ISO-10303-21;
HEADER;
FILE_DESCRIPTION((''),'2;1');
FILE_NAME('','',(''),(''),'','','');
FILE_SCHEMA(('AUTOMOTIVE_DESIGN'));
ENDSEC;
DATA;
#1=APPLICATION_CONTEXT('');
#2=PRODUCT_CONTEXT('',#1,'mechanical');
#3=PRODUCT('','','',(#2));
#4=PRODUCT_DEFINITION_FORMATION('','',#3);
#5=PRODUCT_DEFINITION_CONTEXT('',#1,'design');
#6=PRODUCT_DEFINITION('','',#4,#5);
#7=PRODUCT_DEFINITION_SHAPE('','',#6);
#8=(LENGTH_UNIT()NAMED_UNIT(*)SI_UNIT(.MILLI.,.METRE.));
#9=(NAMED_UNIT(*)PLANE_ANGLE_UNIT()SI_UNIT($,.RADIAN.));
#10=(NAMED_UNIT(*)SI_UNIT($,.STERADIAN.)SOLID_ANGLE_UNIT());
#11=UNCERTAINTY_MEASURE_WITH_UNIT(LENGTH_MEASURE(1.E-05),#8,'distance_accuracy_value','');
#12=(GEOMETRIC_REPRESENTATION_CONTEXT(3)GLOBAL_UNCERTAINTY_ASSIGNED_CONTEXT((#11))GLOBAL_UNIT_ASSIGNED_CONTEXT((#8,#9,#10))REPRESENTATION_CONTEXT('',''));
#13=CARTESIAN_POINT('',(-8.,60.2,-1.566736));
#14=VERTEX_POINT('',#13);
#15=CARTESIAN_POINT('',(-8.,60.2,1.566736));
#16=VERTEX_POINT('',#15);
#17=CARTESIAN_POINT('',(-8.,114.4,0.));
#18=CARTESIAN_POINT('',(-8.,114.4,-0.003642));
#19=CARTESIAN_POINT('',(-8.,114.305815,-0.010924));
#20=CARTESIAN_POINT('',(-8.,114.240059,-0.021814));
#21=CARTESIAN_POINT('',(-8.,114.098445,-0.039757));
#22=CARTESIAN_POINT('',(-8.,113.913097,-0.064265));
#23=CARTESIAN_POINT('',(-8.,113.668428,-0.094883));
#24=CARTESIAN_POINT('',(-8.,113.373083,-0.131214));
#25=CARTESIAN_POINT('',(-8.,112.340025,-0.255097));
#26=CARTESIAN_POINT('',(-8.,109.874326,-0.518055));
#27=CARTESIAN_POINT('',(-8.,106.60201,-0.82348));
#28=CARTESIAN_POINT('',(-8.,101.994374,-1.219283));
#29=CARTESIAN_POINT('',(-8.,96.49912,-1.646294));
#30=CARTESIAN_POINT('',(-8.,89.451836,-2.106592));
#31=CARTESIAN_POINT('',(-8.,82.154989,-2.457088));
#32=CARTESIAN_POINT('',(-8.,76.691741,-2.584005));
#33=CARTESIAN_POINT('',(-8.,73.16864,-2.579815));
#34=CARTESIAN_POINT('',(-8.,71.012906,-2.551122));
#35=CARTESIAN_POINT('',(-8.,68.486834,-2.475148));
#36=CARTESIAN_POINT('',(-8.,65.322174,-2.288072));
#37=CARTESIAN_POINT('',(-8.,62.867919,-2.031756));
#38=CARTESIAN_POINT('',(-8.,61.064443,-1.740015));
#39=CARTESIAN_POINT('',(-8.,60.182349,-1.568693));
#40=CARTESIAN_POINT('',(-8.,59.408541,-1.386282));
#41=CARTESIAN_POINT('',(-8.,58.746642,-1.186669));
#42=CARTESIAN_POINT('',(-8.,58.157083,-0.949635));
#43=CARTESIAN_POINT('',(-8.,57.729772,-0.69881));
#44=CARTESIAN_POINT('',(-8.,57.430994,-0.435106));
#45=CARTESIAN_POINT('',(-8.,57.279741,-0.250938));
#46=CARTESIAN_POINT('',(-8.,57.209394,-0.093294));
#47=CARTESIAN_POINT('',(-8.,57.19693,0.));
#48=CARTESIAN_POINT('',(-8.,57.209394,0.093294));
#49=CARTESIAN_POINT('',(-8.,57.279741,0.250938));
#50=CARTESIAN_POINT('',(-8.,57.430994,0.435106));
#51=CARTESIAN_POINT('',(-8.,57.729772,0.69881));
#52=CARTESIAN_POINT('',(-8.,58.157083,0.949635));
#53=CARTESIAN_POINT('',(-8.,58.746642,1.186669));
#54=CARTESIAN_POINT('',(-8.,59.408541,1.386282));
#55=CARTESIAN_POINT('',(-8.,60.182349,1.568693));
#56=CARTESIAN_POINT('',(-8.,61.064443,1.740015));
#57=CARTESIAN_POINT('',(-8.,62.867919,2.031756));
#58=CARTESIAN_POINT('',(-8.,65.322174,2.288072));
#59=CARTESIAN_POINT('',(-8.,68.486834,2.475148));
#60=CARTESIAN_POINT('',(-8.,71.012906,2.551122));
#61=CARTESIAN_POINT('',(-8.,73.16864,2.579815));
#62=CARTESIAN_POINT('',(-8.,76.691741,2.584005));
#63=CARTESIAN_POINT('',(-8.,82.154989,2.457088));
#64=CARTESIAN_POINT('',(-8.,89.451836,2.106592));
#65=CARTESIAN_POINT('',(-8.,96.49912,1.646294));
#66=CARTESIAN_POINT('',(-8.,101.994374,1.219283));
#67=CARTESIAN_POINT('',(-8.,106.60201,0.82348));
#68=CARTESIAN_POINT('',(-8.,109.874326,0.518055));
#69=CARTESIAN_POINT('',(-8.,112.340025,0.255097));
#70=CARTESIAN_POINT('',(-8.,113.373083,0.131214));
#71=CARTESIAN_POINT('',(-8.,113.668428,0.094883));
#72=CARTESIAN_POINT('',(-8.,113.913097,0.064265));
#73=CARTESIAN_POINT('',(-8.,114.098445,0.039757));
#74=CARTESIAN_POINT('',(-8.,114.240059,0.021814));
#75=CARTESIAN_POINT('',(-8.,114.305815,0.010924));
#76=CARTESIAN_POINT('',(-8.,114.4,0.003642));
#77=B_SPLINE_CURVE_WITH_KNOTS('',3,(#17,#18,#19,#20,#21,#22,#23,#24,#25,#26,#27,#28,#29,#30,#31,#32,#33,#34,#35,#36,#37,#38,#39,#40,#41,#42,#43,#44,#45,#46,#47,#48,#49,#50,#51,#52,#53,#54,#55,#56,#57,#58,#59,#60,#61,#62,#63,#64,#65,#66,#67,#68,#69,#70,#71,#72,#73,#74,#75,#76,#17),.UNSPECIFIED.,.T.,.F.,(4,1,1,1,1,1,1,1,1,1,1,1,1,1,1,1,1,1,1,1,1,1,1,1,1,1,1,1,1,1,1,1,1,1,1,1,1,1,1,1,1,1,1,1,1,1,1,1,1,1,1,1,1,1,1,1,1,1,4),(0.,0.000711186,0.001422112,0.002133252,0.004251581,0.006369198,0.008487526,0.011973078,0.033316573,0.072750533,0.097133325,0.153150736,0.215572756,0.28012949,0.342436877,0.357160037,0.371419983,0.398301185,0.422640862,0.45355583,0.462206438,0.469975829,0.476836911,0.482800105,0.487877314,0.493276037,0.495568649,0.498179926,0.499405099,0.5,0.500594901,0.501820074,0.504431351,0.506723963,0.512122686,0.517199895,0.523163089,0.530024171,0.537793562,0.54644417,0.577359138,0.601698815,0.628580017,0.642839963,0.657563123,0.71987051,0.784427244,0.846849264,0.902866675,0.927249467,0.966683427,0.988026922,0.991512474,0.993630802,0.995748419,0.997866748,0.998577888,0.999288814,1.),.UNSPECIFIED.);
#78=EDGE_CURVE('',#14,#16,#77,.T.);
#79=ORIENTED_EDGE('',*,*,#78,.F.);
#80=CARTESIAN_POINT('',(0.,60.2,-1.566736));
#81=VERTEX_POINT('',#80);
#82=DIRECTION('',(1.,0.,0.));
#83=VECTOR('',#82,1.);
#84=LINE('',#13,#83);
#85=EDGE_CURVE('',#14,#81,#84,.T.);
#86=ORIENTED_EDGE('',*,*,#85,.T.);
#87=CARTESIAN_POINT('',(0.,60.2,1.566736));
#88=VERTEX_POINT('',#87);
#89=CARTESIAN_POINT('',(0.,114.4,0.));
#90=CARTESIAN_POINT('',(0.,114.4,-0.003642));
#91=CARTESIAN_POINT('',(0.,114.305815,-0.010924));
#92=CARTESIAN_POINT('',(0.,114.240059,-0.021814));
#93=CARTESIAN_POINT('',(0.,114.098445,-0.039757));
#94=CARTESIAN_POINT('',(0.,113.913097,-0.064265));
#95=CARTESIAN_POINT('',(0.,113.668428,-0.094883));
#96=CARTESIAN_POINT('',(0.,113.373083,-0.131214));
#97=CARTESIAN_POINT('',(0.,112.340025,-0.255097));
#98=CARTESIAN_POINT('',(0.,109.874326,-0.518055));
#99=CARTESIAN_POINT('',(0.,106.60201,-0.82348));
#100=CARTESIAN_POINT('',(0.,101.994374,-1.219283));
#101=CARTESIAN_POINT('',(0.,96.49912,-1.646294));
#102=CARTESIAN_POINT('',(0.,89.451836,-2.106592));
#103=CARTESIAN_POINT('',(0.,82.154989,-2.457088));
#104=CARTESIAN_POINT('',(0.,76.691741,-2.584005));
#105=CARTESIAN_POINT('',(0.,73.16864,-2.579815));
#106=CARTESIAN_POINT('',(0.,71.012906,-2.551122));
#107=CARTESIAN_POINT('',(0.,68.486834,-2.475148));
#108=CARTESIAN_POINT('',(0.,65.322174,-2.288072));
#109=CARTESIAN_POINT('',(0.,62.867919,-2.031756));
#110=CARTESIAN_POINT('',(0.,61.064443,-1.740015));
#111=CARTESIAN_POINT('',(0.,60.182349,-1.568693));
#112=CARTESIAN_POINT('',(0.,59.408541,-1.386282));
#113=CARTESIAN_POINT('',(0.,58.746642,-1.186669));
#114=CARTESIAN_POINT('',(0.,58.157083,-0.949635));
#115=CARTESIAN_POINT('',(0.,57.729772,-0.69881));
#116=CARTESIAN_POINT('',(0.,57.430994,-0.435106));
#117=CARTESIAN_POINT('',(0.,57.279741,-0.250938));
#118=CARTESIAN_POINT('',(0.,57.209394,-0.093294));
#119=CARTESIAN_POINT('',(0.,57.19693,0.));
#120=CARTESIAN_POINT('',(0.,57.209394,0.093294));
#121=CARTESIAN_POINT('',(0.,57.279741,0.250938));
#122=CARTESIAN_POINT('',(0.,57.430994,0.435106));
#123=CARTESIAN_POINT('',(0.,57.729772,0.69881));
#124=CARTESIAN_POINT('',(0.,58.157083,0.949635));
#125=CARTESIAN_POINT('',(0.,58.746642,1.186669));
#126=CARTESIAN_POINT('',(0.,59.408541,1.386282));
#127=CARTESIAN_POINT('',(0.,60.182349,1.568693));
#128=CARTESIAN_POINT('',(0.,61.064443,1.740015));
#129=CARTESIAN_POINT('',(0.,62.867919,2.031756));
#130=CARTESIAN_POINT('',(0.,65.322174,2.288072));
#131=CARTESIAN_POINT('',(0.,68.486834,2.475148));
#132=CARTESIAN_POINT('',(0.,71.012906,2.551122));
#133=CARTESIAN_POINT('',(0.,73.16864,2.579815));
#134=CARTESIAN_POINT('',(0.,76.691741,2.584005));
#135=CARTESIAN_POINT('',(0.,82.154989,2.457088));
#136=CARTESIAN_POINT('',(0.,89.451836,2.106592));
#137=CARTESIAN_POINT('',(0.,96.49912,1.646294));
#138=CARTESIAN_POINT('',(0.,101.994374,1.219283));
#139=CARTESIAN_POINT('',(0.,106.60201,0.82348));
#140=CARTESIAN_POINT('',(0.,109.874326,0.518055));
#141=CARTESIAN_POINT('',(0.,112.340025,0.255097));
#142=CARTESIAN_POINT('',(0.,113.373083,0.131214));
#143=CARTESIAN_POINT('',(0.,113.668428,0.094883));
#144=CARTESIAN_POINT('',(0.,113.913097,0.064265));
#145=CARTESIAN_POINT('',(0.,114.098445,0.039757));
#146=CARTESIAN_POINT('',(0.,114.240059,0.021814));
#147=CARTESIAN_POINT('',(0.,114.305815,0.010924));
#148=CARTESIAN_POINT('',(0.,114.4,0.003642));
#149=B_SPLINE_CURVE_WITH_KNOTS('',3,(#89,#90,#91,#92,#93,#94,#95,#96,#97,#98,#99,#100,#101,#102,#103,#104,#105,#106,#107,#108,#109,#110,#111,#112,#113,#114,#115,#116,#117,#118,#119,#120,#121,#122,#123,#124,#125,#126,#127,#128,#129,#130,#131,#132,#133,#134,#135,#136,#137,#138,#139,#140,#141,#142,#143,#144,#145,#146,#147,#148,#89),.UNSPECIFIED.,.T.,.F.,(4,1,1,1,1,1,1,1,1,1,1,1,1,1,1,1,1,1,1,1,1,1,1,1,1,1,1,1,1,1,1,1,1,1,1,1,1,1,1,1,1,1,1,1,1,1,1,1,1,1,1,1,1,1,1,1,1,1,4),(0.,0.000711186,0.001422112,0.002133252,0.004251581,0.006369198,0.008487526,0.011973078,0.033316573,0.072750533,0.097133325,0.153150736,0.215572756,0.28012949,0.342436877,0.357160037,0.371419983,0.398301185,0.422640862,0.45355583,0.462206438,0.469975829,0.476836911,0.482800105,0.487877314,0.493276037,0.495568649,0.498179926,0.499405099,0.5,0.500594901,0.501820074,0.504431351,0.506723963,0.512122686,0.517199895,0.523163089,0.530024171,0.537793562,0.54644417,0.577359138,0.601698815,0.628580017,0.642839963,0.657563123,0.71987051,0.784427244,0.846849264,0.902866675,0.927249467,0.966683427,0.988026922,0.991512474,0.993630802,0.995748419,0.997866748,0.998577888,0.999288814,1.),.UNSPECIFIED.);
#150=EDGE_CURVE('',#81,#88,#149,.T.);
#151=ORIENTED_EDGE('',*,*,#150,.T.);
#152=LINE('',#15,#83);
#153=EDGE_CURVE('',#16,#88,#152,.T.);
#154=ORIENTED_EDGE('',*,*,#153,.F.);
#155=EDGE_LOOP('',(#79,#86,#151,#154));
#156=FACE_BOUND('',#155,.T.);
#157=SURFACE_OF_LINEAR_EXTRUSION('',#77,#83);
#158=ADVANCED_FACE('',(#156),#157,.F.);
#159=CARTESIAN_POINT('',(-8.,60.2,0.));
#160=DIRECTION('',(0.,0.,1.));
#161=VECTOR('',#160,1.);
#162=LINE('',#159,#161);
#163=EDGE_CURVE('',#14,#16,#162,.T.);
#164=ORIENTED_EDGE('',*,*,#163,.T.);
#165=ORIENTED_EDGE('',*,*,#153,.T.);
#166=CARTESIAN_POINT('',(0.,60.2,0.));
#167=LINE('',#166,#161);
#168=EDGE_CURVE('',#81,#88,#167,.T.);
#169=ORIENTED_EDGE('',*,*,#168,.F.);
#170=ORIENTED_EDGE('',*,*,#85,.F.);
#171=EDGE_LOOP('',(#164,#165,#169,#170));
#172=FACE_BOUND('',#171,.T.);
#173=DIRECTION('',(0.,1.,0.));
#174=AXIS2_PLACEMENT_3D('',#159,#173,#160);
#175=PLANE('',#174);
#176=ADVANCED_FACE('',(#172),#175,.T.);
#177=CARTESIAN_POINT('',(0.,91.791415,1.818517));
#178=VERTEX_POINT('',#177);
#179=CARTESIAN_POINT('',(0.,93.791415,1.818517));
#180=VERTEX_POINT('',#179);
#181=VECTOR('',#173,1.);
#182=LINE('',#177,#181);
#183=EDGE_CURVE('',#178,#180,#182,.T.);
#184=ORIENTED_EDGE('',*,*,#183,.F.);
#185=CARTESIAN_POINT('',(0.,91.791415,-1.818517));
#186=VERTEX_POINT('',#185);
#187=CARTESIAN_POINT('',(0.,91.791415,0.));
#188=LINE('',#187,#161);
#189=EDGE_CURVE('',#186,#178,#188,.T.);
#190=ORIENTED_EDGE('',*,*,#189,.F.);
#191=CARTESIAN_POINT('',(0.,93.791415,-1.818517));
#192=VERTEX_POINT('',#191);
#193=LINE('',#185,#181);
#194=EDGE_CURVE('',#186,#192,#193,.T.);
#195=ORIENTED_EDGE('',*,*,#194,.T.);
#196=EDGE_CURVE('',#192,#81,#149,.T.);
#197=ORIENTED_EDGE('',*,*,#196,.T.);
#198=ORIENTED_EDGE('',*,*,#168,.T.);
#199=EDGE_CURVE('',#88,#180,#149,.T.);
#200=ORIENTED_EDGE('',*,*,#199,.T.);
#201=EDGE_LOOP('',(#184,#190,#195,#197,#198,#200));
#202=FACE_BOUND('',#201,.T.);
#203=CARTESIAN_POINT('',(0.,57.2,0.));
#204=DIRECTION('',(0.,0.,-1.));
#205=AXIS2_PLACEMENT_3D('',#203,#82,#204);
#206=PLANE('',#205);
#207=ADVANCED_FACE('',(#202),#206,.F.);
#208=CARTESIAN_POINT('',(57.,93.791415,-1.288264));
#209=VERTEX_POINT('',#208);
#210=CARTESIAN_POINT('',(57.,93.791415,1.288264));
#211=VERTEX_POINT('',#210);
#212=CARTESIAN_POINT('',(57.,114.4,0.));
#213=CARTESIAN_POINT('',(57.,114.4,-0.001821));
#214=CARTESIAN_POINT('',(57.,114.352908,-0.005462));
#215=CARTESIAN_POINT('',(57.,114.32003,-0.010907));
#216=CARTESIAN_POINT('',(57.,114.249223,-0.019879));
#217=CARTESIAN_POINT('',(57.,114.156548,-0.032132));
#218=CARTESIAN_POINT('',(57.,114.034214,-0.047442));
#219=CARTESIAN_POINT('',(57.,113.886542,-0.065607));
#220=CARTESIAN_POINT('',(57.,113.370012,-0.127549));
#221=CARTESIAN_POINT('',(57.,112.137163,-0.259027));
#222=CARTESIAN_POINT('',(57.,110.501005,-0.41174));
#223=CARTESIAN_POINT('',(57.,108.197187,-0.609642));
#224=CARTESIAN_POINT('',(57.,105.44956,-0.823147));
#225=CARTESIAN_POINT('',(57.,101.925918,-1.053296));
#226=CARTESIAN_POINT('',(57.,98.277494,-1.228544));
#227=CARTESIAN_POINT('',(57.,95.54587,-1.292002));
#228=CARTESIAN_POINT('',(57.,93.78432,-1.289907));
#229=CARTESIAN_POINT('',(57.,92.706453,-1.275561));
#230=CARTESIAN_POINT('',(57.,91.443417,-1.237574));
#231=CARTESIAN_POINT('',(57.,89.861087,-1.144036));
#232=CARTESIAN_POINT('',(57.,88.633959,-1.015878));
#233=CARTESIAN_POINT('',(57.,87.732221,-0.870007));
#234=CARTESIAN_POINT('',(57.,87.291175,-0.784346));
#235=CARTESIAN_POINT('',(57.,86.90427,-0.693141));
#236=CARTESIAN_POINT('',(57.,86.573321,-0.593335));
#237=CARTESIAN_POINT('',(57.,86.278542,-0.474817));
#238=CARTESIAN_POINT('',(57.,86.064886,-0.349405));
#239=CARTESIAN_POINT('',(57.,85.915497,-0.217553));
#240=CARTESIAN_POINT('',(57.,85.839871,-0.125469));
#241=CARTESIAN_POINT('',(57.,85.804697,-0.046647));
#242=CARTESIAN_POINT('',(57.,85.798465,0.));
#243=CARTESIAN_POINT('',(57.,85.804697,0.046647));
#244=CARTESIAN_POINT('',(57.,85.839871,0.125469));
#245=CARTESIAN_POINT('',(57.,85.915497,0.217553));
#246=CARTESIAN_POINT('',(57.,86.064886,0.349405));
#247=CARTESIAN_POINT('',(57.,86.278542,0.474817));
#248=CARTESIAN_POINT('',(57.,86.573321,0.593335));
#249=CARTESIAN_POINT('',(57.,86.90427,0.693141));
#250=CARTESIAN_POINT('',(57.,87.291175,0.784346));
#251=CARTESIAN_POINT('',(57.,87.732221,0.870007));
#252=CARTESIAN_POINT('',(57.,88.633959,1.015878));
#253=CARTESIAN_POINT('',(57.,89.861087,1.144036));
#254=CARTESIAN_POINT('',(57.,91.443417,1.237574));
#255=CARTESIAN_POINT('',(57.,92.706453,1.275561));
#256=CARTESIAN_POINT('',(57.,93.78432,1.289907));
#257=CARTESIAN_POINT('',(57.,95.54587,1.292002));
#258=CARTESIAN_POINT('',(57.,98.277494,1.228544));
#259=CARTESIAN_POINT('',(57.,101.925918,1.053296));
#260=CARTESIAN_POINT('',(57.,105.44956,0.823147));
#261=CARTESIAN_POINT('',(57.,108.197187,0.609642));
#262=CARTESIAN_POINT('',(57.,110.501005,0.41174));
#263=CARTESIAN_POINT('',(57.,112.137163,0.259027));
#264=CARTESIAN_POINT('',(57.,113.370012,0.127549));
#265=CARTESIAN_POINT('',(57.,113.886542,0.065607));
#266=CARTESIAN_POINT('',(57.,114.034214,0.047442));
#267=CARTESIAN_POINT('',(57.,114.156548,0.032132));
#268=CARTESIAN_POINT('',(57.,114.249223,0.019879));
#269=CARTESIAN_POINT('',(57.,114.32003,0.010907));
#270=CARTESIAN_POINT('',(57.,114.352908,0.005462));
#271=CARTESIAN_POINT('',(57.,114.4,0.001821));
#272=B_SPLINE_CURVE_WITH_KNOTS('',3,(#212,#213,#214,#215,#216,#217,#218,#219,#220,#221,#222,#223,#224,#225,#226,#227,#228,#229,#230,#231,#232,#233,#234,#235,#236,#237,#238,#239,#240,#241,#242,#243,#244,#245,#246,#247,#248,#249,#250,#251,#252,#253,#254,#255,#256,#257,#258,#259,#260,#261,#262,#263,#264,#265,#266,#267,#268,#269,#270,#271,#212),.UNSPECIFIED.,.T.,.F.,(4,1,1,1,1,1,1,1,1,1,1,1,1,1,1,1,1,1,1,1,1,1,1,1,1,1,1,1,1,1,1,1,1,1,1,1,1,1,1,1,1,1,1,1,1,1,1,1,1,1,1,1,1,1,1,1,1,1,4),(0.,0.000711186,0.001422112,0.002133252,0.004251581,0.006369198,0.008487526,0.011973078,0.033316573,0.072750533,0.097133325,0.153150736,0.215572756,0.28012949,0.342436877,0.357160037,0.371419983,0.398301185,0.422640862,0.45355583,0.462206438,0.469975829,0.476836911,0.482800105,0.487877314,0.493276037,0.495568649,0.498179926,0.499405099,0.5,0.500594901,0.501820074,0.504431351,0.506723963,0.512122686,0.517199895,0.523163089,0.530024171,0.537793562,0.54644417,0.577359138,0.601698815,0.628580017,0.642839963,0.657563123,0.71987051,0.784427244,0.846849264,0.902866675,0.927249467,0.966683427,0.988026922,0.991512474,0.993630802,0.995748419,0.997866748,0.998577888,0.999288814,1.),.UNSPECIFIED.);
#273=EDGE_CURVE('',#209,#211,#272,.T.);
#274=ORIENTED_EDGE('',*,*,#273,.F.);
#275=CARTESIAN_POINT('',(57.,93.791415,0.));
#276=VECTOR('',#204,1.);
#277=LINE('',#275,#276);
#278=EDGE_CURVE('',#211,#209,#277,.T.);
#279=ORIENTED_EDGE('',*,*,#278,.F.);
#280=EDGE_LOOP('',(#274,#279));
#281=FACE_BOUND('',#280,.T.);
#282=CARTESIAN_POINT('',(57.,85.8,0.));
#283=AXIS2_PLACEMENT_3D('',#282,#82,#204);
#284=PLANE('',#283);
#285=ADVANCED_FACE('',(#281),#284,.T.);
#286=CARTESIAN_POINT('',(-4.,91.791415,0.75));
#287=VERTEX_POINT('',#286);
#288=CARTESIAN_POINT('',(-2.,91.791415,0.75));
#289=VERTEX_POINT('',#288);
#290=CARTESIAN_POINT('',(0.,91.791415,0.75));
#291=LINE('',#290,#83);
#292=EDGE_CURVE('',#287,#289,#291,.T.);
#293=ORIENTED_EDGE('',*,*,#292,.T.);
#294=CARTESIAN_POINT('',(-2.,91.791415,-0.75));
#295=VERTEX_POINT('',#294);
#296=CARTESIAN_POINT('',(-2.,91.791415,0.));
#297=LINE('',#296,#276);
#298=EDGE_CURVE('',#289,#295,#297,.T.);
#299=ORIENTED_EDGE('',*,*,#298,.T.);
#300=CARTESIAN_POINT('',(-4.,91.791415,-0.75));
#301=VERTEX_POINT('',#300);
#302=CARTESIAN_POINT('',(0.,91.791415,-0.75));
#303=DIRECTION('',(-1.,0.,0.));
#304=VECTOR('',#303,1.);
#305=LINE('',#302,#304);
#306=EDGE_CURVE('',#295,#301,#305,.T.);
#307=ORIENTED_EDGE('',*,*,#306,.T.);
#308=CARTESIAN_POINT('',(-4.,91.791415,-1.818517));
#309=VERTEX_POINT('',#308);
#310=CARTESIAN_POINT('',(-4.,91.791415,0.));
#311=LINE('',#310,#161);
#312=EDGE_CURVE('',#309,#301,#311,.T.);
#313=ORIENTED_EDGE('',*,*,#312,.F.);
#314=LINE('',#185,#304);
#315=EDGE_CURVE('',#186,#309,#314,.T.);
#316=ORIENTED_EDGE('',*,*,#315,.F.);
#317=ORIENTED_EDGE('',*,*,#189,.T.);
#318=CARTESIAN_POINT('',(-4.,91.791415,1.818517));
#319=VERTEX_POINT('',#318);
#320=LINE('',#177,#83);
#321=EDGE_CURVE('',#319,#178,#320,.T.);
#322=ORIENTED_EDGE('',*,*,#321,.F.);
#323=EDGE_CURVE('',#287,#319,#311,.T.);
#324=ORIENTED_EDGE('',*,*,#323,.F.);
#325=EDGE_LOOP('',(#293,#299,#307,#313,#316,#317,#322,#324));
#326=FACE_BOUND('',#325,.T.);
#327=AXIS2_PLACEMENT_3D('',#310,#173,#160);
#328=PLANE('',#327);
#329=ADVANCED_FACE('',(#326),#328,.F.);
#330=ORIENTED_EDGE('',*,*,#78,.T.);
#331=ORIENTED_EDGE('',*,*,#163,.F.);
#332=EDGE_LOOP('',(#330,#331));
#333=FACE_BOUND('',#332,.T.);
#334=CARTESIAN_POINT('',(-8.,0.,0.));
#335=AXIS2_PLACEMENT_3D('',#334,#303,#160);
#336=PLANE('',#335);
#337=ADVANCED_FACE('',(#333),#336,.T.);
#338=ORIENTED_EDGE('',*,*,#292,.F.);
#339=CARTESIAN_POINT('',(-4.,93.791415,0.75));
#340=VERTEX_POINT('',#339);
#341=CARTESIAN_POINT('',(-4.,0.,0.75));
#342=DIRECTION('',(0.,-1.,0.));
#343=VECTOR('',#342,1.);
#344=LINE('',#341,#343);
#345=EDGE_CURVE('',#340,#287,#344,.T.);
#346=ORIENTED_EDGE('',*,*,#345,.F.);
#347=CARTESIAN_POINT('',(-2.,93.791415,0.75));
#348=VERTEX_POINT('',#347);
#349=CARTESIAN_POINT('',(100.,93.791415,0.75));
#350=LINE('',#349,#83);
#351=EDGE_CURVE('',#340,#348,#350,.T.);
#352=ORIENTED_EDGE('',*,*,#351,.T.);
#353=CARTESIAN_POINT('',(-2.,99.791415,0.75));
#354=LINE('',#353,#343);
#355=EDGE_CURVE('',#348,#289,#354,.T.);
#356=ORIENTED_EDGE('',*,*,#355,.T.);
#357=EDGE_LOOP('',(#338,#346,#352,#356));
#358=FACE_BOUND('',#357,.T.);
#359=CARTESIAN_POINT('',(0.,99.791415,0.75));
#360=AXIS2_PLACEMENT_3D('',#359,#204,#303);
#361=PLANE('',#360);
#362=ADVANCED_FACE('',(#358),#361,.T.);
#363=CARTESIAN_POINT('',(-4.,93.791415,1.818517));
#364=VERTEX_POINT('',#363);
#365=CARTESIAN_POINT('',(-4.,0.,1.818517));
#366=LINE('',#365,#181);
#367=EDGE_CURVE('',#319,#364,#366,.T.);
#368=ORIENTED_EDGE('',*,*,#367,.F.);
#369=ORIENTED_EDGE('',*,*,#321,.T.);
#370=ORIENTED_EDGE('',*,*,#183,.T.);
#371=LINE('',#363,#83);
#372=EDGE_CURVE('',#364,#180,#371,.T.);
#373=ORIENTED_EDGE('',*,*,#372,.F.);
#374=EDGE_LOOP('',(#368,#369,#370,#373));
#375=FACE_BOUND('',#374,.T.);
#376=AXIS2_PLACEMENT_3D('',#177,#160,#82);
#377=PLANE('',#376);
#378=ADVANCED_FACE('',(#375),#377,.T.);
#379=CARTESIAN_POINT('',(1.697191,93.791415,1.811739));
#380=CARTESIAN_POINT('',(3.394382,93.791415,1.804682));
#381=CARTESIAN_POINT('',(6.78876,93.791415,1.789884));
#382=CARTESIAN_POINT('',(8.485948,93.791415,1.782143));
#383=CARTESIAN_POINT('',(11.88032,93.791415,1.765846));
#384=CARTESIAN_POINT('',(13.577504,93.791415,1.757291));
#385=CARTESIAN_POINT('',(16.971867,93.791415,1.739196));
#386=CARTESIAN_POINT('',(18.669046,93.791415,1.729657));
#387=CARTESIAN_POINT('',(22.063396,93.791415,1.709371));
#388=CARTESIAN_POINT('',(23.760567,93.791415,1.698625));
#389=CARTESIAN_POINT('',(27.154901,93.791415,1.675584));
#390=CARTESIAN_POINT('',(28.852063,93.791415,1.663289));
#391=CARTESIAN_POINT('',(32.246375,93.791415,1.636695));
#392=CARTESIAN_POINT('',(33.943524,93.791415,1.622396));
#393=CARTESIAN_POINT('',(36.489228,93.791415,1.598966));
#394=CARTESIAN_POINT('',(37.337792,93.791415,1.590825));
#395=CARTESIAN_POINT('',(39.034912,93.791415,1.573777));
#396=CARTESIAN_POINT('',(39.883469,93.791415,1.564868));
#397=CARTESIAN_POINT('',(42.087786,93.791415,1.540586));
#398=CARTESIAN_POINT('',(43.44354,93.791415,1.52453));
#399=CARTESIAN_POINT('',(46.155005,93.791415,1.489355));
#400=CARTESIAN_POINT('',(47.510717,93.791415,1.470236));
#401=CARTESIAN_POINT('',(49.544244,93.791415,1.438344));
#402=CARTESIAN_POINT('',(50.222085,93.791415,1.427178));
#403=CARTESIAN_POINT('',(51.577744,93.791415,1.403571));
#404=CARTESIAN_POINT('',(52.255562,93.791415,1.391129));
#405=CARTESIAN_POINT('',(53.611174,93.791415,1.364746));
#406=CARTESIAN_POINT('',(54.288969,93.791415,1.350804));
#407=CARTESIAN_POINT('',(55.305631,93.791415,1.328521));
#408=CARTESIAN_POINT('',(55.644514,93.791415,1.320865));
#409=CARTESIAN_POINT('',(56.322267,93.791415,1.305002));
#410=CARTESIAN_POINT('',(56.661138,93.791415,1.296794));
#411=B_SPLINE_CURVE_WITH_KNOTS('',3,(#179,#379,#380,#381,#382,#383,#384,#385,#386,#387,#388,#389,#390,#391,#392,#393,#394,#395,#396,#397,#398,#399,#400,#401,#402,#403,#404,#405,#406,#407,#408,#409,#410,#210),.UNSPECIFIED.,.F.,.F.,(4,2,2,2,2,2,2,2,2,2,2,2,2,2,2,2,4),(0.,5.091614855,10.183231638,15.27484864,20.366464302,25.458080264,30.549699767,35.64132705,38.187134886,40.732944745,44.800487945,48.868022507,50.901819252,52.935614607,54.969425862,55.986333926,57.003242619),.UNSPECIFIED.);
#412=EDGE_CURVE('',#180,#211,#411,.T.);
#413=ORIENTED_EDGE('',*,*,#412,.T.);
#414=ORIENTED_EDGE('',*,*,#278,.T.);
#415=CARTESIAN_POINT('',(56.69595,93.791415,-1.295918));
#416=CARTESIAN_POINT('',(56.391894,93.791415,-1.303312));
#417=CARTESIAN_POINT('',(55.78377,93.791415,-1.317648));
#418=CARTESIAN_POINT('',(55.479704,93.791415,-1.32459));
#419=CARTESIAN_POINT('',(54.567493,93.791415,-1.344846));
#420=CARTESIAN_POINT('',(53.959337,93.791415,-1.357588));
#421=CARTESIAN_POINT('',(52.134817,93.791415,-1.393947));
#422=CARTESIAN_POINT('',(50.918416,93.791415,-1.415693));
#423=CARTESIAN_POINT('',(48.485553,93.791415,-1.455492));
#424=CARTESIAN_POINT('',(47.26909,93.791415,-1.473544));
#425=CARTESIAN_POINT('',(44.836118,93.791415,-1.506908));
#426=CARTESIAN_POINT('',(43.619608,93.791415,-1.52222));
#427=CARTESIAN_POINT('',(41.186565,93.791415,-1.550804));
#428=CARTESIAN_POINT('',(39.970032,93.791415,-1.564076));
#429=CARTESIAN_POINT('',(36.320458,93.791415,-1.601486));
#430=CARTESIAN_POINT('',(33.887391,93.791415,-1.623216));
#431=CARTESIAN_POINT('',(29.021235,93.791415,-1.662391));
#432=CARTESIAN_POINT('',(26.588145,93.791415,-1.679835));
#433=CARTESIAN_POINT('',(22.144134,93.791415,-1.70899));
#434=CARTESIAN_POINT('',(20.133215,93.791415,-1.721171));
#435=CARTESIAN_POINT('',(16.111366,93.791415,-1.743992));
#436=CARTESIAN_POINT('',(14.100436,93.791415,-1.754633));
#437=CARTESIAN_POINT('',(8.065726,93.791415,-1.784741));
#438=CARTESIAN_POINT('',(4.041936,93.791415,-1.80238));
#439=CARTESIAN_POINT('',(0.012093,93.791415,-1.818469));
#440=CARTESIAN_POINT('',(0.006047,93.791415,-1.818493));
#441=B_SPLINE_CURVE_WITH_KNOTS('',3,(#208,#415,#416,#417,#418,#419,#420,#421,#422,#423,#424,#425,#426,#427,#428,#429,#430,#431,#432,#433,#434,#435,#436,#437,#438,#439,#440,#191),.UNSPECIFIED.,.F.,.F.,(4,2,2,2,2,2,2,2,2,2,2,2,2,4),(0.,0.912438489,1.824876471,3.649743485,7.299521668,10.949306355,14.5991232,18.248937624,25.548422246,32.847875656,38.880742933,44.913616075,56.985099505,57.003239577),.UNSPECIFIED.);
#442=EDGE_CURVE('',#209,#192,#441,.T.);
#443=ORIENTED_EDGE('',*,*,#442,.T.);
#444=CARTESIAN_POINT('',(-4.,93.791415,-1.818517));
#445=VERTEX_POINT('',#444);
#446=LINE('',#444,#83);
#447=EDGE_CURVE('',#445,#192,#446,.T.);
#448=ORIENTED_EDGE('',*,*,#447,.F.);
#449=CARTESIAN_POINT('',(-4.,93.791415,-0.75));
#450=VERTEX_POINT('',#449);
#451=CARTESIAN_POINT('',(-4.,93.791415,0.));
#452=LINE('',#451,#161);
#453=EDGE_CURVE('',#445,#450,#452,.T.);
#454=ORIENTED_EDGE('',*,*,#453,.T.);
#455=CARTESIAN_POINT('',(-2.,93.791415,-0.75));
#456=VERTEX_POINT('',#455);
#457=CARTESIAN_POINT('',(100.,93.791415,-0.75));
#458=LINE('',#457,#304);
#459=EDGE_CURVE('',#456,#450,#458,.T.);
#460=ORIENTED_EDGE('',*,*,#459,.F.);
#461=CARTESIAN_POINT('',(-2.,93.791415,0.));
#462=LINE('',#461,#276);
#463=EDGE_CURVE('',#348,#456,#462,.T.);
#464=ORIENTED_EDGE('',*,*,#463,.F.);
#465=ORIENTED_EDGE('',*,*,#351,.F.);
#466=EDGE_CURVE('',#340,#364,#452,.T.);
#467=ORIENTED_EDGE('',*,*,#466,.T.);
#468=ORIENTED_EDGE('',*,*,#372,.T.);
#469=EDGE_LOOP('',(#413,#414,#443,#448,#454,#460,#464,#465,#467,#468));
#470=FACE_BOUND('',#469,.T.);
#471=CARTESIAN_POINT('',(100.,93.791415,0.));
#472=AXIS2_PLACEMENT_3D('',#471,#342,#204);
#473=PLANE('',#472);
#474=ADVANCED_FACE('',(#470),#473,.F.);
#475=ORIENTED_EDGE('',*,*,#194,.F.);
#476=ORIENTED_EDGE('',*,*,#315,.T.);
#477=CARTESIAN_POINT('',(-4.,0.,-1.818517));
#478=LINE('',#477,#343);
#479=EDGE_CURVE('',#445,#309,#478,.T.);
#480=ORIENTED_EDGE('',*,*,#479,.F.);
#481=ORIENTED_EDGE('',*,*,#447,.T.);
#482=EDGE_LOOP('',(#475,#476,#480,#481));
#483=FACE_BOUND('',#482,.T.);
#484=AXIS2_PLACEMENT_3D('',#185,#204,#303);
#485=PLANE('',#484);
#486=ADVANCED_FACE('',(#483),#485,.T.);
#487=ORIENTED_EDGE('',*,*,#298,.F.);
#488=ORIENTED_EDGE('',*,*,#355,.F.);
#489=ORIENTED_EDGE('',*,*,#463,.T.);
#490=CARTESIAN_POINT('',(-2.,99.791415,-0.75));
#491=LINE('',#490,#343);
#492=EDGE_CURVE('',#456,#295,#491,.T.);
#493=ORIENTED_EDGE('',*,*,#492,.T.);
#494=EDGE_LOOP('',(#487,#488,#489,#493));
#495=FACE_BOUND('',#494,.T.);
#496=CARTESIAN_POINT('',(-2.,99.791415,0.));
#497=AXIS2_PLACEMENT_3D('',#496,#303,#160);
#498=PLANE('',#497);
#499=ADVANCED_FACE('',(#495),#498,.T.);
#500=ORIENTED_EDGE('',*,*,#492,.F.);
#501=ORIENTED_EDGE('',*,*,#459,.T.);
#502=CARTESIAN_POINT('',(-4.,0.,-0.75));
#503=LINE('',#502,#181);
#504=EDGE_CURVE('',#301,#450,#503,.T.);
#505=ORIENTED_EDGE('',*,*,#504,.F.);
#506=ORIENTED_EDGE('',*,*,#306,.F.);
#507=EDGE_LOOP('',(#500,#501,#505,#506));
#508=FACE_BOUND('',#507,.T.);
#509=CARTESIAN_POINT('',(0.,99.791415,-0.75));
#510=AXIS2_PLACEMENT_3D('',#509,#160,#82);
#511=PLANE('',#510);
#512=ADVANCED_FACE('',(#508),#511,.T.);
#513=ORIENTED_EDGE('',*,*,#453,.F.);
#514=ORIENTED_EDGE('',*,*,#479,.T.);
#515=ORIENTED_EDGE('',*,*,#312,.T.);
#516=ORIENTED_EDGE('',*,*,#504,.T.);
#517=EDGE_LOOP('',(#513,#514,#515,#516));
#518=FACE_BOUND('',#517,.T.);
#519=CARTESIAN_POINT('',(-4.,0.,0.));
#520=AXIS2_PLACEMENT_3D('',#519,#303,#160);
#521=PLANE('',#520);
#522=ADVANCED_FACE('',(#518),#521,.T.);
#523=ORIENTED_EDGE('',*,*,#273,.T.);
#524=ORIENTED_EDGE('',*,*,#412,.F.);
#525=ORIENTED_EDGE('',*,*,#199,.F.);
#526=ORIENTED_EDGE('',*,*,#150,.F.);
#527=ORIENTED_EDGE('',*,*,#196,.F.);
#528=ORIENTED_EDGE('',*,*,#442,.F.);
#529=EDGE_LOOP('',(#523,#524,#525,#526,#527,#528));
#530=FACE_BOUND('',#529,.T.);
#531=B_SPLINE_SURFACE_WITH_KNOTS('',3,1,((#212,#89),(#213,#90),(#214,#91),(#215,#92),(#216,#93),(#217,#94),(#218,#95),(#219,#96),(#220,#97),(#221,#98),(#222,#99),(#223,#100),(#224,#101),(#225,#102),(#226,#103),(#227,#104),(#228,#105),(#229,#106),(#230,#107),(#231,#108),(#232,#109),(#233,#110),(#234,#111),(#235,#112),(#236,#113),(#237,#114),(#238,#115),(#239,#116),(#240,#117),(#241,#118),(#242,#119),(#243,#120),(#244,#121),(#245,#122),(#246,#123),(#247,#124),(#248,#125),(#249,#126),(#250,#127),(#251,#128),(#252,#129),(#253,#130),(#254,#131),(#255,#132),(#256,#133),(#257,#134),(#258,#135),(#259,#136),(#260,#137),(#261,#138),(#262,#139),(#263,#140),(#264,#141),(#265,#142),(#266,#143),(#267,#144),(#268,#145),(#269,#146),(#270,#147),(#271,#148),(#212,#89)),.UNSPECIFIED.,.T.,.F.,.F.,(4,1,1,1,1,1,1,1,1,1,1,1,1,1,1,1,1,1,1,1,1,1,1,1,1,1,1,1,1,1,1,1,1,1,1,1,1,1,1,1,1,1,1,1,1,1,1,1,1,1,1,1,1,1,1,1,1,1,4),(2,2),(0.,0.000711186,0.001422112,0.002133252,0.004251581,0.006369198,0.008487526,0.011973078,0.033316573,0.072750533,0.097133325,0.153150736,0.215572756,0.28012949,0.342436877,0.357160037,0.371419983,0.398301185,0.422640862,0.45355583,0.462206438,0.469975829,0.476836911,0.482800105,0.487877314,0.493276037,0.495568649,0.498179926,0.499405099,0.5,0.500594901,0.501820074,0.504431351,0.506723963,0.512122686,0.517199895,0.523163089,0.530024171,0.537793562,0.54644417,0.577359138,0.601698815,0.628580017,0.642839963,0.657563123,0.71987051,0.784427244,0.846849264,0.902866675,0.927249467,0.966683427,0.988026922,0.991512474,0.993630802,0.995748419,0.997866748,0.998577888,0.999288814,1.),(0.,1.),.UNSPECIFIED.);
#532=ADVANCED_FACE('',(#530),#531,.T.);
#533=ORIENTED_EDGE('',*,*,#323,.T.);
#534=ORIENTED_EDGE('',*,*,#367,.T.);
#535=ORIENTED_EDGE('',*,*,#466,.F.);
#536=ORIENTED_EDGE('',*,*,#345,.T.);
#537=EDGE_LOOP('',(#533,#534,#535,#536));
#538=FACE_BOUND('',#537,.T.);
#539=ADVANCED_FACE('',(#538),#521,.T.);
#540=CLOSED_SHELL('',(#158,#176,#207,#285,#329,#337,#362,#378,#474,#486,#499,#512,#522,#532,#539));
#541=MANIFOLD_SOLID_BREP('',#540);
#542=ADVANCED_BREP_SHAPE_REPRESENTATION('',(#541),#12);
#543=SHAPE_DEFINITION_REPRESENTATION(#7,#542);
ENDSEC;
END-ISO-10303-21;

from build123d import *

# Parameters (mm, degrees)
CUT_EXTRUDE_1_DEPTH = 100
EXTRUDE_1_DEPTH     = 4
EXTRUDE_2_DEPTH     = 8
CUT_EXTRUDE_2_DEPTH = 8
CUT_EXTRUDE_3_DEPTH = 2


with BuildPart() as part:
    # 边界1: read off the stored shape, not the designer's step
    # 边界1: loft between two sections, ruled curve by curve
    other_1_from = [
        Edge.make_bspline([(57, 114.4, 0), (57, 114.4, -0.001820958), (57, 114.352907673, -0.005462209), (57, 114.320029662, -0.010907062), (57, 114.249222739, -0.019878571), (57, 114.156548338, -0.032132456), (57, 114.034213823, -0.047441735), (57, 113.88654175, -0.065607247), (57, 113.370012427, -0.127548617), (57, 112.137163028, -0.259027461), (57, 110.501004902, -0.411740073), (57, 108.197187, -0.609641558), (57, 105.449560235, -0.823147067), (57, 101.925918142, -1.053296025), (57, 98.277494458, -1.228543839), (57, 95.54587026, -1.292002462), (57, 93.784319833, -1.289907394), (57, 92.706452955, -1.275561059), (57, 91.44341688, -1.237574119), (57, 89.861087122, -1.144036077), (57, 88.633959438, -1.015878162), (57, 87.732221341, -0.870007472), (57, 87.291174629, -0.784346378), (57, 86.904270346, -0.693141039), (57, 86.573320845, -0.593334554), (57, 86.278541554, -0.47481733), (57, 86.064886191, -0.349405025), (57, 85.915497173, -0.21755301), (57, 85.83987064, -0.125468872), (57, 85.804696915, -0.046646811), (57, 85.798464788, 0), (57, 85.804696915, 0.046646811), (57, 85.83987064, 0.125468872), (57, 85.915497173, 0.21755301), (57, 86.064886191, 0.349405025), (57, 86.278541554, 0.47481733), (57, 86.573320845, 0.593334554), (57, 86.904270346, 0.693141039), (57, 87.291174629, 0.784346378), (57, 87.732221341, 0.870007472), (57, 88.633959438, 1.015878162), (57, 89.861087122, 1.144036077), (57, 91.44341688, 1.237574119), (57, 92.706452955, 1.275561059), (57, 93.784319833, 1.289907394), (57, 95.54587026, 1.292002462), (57, 98.277494458, 1.228543839), (57, 101.925918142, 1.053296025), (57, 105.449560235, 0.823147067), (57, 108.197187, 0.609641558), (57, 110.501004902, 0.411740073), (57, 112.137163028, 0.259027461), (57, 113.370012427, 0.127548617), (57, 113.88654175, 0.065607247), (57, 114.034213823, 0.047441735), (57, 114.156548338, 0.032132456), (57, 114.249222739, 0.019878571), (57, 114.320029662, 0.010907062), (57, 114.352907673, 0.005462209), (57, 114.4, 0.001820958), (57, 114.4, 0)], [0, 0, 0, 0, 0.000711186, 0.001422112, 0.002133252, 0.004251581, 0.006369198, 0.008487526, 0.011973078, 0.033316573, 0.072750533, 0.097133325, 0.153150736, 0.215572756, 0.28012949, 0.342436877, 0.357160037, 0.371419983, 0.398301185, 0.422640862, 0.45355583, 0.462206438, 0.469975829, 0.476836911, 0.482800105, 0.487877314, 0.493276037, 0.495568649, 0.498179926, 0.499405099, 0.5, 0.500594901, 0.501820074, 0.504431351, 0.506723963, 0.512122686, 0.517199895, 0.523163089, 0.530024171, 0.537793562, 0.54644417, 0.577359138, 0.601698815, 0.628580017, 0.642839963, 0.657563123, 0.71987051, 0.784427244, 0.846849264, 0.902866675, 0.927249467, 0.966683427, 0.988026922, 0.991512474, 0.993630802, 0.995748419, 0.997866748, 0.998577888, 0.999288814, 1, 1, 1, 1], 3),
    ]
    other_1_to = [
        Edge.make_bspline([(0, 114.4, 0), (0, 114.4, -0.003641916), (0, 114.305815345, -0.010924418), (0, 114.240059323, -0.021814123), (0, 114.098445477, -0.039757143), (0, 113.913096675, -0.064264912), (0, 113.668427647, -0.09488347), (0, 113.3730835, -0.131214495), (0, 112.340024854, -0.255097235), (0, 109.874326056, -0.518054923), (0, 106.602009805, -0.823480147), (0, 101.994374001, -1.219283117), (0, 96.499120471, -1.646294135), (0, 89.451836285, -2.106592051), (0, 82.154988917, -2.457087677), (0, 76.69174052, -2.584004925), (0, 73.168639667, -2.579814789), (0, 71.01290591, -2.551122119), (0, 68.486833761, -2.475148238), (0, 65.322174244, -2.288072154), (0, 62.867918876, -2.031756324), (0, 61.064442682, -1.740014943), (0, 60.182349259, -1.568692756), (0, 59.408540691, -1.386282078), (0, 58.746641691, -1.186669108), (0, 58.157083107, -0.949634659), (0, 57.729772382, -0.698810051), (0, 57.430994345, -0.43510602), (0, 57.27974128, -0.250937745), (0, 57.209393829, -0.093293621), (0, 57.196929575, 0), (0, 57.209393829, 0.093293621), (0, 57.27974128, 0.250937745), (0, 57.430994345, 0.43510602), (0, 57.729772382, 0.698810051), (0, 58.157083107, 0.949634659), (0, 58.746641691, 1.186669108), (0, 59.408540691, 1.386282078), (0, 60.182349259, 1.568692756), (0, 61.064442682, 1.740014943), (0, 62.867918876, 2.031756324), (0, 65.322174244, 2.288072154), (0, 68.486833761, 2.475148238), (0, 71.01290591, 2.551122119), (0, 73.168639667, 2.579814789), (0, 76.69174052, 2.584004925), (0, 82.154988917, 2.457087677), (0, 89.451836285, 2.106592051), (0, 96.499120471, 1.646294135), (0, 101.994374001, 1.219283117), (0, 106.602009805, 0.823480147), (0, 109.874326056, 0.518054923), (0, 112.340024854, 0.255097235), (0, 113.3730835, 0.131214495), (0, 113.668427647, 0.09488347), (0, 113.913096675, 0.064264912), (0, 114.098445477, 0.039757143), (0, 114.240059323, 0.021814123), (0, 114.305815345, 0.010924418), (0, 114.4, 0.003641916), (0, 114.4, 0)], [0, 0, 0, 0, 0.000711186, 0.001422112, 0.002133252, 0.004251581, 0.006369198, 0.008487526, 0.011973078, 0.033316573, 0.072750533, 0.097133325, 0.153150736, 0.215572756, 0.28012949, 0.342436877, 0.357160037, 0.371419983, 0.398301185, 0.422640862, 0.45355583, 0.462206438, 0.469975829, 0.476836911, 0.482800105, 0.487877314, 0.493276037, 0.495568649, 0.498179926, 0.499405099, 0.5, 0.500594901, 0.501820074, 0.504431351, 0.506723963, 0.512122686, 0.517199895, 0.523163089, 0.530024171, 0.537793562, 0.54644417, 0.577359138, 0.601698815, 0.628580017, 0.642839963, 0.657563123, 0.71987051, 0.784427244, 0.846849264, 0.902866675, 0.927249467, 0.966683427, 0.988026922, 0.991512474, 0.993630802, 0.995748419, 0.997866748, 0.998577888, 0.999288814, 1, 1, 1, 1], 3),
    ]
    other_1 = Solid(Shell([*[Face.make_surface_from_curves(other_1_from[k], other_1_to[k]) for k in range(1)], Face(Wire(other_1_from)), Face(Wire(other_1_to))]))
    add(other_1)

    # 草图11 → 切除-拉伸1 (cut)
    with BuildSketch(Plane.ZY):
        with BuildLine():
            add(Edge.make_bspline(
                [(1.818517356, 93.791415019), (1.753373518, 94.776013938), (1.536110859, 97.917081629), (1.219283117, 101.994374001), (0.823480147, 106.602009805), (0.518054923, 109.874326056), (0.255097235, 112.340024854), (0.131214495, 113.3730835), (0.09488347, 113.668427647), (0.064264912, 113.913096675), (0.039757143, 114.098445477), (0.021814123, 114.240059323), (0.010924418, 114.305815345), (0.003641916, 114.4), (0, 114.4)],
                knots=[0.821280205, 0.821280205, 0.821280205, 0.821280205, 0.846849264, 0.902866675, 0.927249467, 0.966683427, 0.988026922, 0.991512474, 0.993630802, 0.995748419, 0.997866748, 0.998577888, 0.999288814, 1, 1, 1, 1], degree=3))
            Line((0, 114.4), (0, 93.791415019))
            Line((0, 93.791415019), (1.818517356, 93.791415019))
        make_face()
        with BuildLine():
            Line((0, 93.791415019), (0, 114.4))
            add(Edge.make_bspline(
                [(0, 114.4), (-0.003641916, 114.4), (-0.010924418, 114.305815345), (-0.021814123, 114.240059323), (-0.039757143, 114.098445477), (-0.064264912, 113.913096675), (-0.09488347, 113.668427647), (-0.131214495, 113.3730835), (-0.255097235, 112.340024854), (-0.518054923, 109.874326056), (-0.823480147, 106.602009805), (-1.219283117, 101.994374001), (-1.536110859, 97.917081629), (-1.753373518, 94.776013938), (-1.818517356, 93.791415019)],
                knots=[0, 0, 0, 0, 0.000711186, 0.001422112, 0.002133252, 0.004251581, 0.006369198, 0.008487526, 0.011973078, 0.033316573, 0.072750533, 0.097133325, 0.153150736, 0.178719795, 0.178719795, 0.178719795, 0.178719795], degree=3))
            Line((-1.818517356, 93.791415019), (0, 93.791415019))
        make_face()
    extrude(amount=-CUT_EXTRUDE_1_DEPTH, mode=Mode.SUBTRACT)

    # 草图11<4> → 凸台-拉伸1 (add)
    with BuildSketch(Plane.ZY):
        with BuildLine():
            Line((1.818517355, 93.791415019), (0, 93.791415019))
            Line((0, 93.791415019), (0, 91.791415019))
            Line((0, 91.791415019), (1.946673224, 91.791415019))
            add(Edge.make_bspline(
                [(1.946673224, 91.791415019), (1.905372431, 92.4581713), (1.862619998, 93.124837556), (1.818517355, 93.791415019)],
                knots=[0.803969849, 0.803969849, 0.803969849, 0.803969849, 0.821280205, 0.821280205, 0.821280205, 0.821280205], degree=3))
        make_face()
        with BuildLine():
            Line((0, 91.791415019), (0, 93.791415019))
            Line((0, 93.791415019), (-1.818517355, 93.791415019))
            add(Edge.make_bspline(
                [(-1.818517355, 93.791415019), (-1.862619998, 93.124837556), (-1.905372431, 92.4581713), (-1.946673224, 91.791415019)],
                knots=[0.178719795, 0.178719795, 0.178719795, 0.178719795, 0.196030151, 0.196030151, 0.196030151, 0.196030151], degree=3))
            Line((-1.946673224, 91.791415019), (0, 91.791415019))
        make_face()
        with BuildLine():
            Line((1.818517355, 93.791415019), (0, 93.791415019))
            Line((0, 93.791415019), (0, 91.791415019))
            Line((0, 91.791415019), (1.946673224, 91.791415019))
            add(Edge.make_bspline(
                [(1.946673224, 91.791415019), (1.905372431, 92.4581713), (1.862619998, 93.124837556), (1.818517355, 93.791415019)],
                knots=[0.803969849, 0.803969849, 0.803969849, 0.803969849, 0.821280205, 0.821280205, 0.821280205, 0.821280205], degree=3))
        make_face()
        with BuildLine():
            Line((0, 91.791415019), (0, 93.791415019))
            Line((0, 93.791415019), (-1.818517355, 93.791415019))
            add(Edge.make_bspline(
                [(-1.818517355, 93.791415019), (-1.862619998, 93.124837556), (-1.905372431, 92.4581713), (-1.946673224, 91.791415019)],
                knots=[0.178719795, 0.178719795, 0.178719795, 0.178719795, 0.196030151, 0.196030151, 0.196030151, 0.196030151], degree=3))
            Line((-1.946673224, 91.791415019), (0, 91.791415019))
        make_face()
    extrude(amount=EXTRUDE_1_DEPTH)

    # 草图12 → 凸台-拉伸2 (add)
    with BuildSketch(Plane.ZY):
        with BuildLine():
            Line((-1.566736341, 60.2), (1.566736341, 60.2))
            add(Edge.make_bspline(
                [(-1.566736341, 60.2), (-1.5631196, 60.183072108), (-1.503847378, 59.907267174), (-1.386282078, 59.408540691), (-1.186669108, 58.746641691), (-0.949634659, 58.157083107), (-0.698810051, 57.729772382), (-0.43510602, 57.430994345), (-0.250937745, 57.27974128), (-0.093293621, 57.209393829), (0, 57.196929575), (0.093293621, 57.209393829), (0.250937745, 57.27974128), (0.43510602, 57.430994345), (0.698810051, 57.729772382), (0.949634659, 58.157083107), (1.186669108, 58.746641691), (1.386282078, 59.408540691), (1.503847378, 59.907267174), (1.5631196, 60.183072108), (1.566736341, 60.2)],
                knots=[0.469527304, 0.469527304, 0.469527304, 0.469527304, 0.469975829, 0.476836911, 0.482800105, 0.487877314, 0.493276037, 0.495568649, 0.498179926, 0.499405099, 0.5, 0.500594901, 0.501820074, 0.504431351, 0.506723963, 0.512122686, 0.517199895, 0.523163089, 0.530024171, 0.530472696, 0.530472696, 0.530472696, 0.530472696], degree=3))
        make_face()
    extrude(amount=EXTRUDE_2_DEPTH)

    # 草图13 → 切除-拉伸2 (cut)
    with BuildSketch(Plane.XZ.offset(-91.791415019)):
        Polygon((-4, 0.75), (-4, 0), (-4, -0.75), (-2, -0.75), (-2, 0.75), align=None)
    extrude(amount=-CUT_EXTRUDE_2_DEPTH, mode=Mode.SUBTRACT)

    # 草图14 → 切除-拉伸3 (cut)
    with BuildSketch(Plane(origin=(0, 93.791415019, 0), x_dir=(1, 0, 0), z_dir=(0, 1, 0))):
        Polygon((0, 8.839262419), (0, 1.818517355), (-4, 1.818517355), (-8.303964659, 1.818517355), (-8.507605429, 8.583151707), align=None)
        Polygon((-8.303964659, -7.097187561), (0, -7.097187561), (0, -1.818517354), (-4, -1.818517355), (-8.303964659, -1.818517355), align=None)
    extrude(amount=-CUT_EXTRUDE_3_DEPTH, mode=Mode.SUBTRACT)


solid = part.part
